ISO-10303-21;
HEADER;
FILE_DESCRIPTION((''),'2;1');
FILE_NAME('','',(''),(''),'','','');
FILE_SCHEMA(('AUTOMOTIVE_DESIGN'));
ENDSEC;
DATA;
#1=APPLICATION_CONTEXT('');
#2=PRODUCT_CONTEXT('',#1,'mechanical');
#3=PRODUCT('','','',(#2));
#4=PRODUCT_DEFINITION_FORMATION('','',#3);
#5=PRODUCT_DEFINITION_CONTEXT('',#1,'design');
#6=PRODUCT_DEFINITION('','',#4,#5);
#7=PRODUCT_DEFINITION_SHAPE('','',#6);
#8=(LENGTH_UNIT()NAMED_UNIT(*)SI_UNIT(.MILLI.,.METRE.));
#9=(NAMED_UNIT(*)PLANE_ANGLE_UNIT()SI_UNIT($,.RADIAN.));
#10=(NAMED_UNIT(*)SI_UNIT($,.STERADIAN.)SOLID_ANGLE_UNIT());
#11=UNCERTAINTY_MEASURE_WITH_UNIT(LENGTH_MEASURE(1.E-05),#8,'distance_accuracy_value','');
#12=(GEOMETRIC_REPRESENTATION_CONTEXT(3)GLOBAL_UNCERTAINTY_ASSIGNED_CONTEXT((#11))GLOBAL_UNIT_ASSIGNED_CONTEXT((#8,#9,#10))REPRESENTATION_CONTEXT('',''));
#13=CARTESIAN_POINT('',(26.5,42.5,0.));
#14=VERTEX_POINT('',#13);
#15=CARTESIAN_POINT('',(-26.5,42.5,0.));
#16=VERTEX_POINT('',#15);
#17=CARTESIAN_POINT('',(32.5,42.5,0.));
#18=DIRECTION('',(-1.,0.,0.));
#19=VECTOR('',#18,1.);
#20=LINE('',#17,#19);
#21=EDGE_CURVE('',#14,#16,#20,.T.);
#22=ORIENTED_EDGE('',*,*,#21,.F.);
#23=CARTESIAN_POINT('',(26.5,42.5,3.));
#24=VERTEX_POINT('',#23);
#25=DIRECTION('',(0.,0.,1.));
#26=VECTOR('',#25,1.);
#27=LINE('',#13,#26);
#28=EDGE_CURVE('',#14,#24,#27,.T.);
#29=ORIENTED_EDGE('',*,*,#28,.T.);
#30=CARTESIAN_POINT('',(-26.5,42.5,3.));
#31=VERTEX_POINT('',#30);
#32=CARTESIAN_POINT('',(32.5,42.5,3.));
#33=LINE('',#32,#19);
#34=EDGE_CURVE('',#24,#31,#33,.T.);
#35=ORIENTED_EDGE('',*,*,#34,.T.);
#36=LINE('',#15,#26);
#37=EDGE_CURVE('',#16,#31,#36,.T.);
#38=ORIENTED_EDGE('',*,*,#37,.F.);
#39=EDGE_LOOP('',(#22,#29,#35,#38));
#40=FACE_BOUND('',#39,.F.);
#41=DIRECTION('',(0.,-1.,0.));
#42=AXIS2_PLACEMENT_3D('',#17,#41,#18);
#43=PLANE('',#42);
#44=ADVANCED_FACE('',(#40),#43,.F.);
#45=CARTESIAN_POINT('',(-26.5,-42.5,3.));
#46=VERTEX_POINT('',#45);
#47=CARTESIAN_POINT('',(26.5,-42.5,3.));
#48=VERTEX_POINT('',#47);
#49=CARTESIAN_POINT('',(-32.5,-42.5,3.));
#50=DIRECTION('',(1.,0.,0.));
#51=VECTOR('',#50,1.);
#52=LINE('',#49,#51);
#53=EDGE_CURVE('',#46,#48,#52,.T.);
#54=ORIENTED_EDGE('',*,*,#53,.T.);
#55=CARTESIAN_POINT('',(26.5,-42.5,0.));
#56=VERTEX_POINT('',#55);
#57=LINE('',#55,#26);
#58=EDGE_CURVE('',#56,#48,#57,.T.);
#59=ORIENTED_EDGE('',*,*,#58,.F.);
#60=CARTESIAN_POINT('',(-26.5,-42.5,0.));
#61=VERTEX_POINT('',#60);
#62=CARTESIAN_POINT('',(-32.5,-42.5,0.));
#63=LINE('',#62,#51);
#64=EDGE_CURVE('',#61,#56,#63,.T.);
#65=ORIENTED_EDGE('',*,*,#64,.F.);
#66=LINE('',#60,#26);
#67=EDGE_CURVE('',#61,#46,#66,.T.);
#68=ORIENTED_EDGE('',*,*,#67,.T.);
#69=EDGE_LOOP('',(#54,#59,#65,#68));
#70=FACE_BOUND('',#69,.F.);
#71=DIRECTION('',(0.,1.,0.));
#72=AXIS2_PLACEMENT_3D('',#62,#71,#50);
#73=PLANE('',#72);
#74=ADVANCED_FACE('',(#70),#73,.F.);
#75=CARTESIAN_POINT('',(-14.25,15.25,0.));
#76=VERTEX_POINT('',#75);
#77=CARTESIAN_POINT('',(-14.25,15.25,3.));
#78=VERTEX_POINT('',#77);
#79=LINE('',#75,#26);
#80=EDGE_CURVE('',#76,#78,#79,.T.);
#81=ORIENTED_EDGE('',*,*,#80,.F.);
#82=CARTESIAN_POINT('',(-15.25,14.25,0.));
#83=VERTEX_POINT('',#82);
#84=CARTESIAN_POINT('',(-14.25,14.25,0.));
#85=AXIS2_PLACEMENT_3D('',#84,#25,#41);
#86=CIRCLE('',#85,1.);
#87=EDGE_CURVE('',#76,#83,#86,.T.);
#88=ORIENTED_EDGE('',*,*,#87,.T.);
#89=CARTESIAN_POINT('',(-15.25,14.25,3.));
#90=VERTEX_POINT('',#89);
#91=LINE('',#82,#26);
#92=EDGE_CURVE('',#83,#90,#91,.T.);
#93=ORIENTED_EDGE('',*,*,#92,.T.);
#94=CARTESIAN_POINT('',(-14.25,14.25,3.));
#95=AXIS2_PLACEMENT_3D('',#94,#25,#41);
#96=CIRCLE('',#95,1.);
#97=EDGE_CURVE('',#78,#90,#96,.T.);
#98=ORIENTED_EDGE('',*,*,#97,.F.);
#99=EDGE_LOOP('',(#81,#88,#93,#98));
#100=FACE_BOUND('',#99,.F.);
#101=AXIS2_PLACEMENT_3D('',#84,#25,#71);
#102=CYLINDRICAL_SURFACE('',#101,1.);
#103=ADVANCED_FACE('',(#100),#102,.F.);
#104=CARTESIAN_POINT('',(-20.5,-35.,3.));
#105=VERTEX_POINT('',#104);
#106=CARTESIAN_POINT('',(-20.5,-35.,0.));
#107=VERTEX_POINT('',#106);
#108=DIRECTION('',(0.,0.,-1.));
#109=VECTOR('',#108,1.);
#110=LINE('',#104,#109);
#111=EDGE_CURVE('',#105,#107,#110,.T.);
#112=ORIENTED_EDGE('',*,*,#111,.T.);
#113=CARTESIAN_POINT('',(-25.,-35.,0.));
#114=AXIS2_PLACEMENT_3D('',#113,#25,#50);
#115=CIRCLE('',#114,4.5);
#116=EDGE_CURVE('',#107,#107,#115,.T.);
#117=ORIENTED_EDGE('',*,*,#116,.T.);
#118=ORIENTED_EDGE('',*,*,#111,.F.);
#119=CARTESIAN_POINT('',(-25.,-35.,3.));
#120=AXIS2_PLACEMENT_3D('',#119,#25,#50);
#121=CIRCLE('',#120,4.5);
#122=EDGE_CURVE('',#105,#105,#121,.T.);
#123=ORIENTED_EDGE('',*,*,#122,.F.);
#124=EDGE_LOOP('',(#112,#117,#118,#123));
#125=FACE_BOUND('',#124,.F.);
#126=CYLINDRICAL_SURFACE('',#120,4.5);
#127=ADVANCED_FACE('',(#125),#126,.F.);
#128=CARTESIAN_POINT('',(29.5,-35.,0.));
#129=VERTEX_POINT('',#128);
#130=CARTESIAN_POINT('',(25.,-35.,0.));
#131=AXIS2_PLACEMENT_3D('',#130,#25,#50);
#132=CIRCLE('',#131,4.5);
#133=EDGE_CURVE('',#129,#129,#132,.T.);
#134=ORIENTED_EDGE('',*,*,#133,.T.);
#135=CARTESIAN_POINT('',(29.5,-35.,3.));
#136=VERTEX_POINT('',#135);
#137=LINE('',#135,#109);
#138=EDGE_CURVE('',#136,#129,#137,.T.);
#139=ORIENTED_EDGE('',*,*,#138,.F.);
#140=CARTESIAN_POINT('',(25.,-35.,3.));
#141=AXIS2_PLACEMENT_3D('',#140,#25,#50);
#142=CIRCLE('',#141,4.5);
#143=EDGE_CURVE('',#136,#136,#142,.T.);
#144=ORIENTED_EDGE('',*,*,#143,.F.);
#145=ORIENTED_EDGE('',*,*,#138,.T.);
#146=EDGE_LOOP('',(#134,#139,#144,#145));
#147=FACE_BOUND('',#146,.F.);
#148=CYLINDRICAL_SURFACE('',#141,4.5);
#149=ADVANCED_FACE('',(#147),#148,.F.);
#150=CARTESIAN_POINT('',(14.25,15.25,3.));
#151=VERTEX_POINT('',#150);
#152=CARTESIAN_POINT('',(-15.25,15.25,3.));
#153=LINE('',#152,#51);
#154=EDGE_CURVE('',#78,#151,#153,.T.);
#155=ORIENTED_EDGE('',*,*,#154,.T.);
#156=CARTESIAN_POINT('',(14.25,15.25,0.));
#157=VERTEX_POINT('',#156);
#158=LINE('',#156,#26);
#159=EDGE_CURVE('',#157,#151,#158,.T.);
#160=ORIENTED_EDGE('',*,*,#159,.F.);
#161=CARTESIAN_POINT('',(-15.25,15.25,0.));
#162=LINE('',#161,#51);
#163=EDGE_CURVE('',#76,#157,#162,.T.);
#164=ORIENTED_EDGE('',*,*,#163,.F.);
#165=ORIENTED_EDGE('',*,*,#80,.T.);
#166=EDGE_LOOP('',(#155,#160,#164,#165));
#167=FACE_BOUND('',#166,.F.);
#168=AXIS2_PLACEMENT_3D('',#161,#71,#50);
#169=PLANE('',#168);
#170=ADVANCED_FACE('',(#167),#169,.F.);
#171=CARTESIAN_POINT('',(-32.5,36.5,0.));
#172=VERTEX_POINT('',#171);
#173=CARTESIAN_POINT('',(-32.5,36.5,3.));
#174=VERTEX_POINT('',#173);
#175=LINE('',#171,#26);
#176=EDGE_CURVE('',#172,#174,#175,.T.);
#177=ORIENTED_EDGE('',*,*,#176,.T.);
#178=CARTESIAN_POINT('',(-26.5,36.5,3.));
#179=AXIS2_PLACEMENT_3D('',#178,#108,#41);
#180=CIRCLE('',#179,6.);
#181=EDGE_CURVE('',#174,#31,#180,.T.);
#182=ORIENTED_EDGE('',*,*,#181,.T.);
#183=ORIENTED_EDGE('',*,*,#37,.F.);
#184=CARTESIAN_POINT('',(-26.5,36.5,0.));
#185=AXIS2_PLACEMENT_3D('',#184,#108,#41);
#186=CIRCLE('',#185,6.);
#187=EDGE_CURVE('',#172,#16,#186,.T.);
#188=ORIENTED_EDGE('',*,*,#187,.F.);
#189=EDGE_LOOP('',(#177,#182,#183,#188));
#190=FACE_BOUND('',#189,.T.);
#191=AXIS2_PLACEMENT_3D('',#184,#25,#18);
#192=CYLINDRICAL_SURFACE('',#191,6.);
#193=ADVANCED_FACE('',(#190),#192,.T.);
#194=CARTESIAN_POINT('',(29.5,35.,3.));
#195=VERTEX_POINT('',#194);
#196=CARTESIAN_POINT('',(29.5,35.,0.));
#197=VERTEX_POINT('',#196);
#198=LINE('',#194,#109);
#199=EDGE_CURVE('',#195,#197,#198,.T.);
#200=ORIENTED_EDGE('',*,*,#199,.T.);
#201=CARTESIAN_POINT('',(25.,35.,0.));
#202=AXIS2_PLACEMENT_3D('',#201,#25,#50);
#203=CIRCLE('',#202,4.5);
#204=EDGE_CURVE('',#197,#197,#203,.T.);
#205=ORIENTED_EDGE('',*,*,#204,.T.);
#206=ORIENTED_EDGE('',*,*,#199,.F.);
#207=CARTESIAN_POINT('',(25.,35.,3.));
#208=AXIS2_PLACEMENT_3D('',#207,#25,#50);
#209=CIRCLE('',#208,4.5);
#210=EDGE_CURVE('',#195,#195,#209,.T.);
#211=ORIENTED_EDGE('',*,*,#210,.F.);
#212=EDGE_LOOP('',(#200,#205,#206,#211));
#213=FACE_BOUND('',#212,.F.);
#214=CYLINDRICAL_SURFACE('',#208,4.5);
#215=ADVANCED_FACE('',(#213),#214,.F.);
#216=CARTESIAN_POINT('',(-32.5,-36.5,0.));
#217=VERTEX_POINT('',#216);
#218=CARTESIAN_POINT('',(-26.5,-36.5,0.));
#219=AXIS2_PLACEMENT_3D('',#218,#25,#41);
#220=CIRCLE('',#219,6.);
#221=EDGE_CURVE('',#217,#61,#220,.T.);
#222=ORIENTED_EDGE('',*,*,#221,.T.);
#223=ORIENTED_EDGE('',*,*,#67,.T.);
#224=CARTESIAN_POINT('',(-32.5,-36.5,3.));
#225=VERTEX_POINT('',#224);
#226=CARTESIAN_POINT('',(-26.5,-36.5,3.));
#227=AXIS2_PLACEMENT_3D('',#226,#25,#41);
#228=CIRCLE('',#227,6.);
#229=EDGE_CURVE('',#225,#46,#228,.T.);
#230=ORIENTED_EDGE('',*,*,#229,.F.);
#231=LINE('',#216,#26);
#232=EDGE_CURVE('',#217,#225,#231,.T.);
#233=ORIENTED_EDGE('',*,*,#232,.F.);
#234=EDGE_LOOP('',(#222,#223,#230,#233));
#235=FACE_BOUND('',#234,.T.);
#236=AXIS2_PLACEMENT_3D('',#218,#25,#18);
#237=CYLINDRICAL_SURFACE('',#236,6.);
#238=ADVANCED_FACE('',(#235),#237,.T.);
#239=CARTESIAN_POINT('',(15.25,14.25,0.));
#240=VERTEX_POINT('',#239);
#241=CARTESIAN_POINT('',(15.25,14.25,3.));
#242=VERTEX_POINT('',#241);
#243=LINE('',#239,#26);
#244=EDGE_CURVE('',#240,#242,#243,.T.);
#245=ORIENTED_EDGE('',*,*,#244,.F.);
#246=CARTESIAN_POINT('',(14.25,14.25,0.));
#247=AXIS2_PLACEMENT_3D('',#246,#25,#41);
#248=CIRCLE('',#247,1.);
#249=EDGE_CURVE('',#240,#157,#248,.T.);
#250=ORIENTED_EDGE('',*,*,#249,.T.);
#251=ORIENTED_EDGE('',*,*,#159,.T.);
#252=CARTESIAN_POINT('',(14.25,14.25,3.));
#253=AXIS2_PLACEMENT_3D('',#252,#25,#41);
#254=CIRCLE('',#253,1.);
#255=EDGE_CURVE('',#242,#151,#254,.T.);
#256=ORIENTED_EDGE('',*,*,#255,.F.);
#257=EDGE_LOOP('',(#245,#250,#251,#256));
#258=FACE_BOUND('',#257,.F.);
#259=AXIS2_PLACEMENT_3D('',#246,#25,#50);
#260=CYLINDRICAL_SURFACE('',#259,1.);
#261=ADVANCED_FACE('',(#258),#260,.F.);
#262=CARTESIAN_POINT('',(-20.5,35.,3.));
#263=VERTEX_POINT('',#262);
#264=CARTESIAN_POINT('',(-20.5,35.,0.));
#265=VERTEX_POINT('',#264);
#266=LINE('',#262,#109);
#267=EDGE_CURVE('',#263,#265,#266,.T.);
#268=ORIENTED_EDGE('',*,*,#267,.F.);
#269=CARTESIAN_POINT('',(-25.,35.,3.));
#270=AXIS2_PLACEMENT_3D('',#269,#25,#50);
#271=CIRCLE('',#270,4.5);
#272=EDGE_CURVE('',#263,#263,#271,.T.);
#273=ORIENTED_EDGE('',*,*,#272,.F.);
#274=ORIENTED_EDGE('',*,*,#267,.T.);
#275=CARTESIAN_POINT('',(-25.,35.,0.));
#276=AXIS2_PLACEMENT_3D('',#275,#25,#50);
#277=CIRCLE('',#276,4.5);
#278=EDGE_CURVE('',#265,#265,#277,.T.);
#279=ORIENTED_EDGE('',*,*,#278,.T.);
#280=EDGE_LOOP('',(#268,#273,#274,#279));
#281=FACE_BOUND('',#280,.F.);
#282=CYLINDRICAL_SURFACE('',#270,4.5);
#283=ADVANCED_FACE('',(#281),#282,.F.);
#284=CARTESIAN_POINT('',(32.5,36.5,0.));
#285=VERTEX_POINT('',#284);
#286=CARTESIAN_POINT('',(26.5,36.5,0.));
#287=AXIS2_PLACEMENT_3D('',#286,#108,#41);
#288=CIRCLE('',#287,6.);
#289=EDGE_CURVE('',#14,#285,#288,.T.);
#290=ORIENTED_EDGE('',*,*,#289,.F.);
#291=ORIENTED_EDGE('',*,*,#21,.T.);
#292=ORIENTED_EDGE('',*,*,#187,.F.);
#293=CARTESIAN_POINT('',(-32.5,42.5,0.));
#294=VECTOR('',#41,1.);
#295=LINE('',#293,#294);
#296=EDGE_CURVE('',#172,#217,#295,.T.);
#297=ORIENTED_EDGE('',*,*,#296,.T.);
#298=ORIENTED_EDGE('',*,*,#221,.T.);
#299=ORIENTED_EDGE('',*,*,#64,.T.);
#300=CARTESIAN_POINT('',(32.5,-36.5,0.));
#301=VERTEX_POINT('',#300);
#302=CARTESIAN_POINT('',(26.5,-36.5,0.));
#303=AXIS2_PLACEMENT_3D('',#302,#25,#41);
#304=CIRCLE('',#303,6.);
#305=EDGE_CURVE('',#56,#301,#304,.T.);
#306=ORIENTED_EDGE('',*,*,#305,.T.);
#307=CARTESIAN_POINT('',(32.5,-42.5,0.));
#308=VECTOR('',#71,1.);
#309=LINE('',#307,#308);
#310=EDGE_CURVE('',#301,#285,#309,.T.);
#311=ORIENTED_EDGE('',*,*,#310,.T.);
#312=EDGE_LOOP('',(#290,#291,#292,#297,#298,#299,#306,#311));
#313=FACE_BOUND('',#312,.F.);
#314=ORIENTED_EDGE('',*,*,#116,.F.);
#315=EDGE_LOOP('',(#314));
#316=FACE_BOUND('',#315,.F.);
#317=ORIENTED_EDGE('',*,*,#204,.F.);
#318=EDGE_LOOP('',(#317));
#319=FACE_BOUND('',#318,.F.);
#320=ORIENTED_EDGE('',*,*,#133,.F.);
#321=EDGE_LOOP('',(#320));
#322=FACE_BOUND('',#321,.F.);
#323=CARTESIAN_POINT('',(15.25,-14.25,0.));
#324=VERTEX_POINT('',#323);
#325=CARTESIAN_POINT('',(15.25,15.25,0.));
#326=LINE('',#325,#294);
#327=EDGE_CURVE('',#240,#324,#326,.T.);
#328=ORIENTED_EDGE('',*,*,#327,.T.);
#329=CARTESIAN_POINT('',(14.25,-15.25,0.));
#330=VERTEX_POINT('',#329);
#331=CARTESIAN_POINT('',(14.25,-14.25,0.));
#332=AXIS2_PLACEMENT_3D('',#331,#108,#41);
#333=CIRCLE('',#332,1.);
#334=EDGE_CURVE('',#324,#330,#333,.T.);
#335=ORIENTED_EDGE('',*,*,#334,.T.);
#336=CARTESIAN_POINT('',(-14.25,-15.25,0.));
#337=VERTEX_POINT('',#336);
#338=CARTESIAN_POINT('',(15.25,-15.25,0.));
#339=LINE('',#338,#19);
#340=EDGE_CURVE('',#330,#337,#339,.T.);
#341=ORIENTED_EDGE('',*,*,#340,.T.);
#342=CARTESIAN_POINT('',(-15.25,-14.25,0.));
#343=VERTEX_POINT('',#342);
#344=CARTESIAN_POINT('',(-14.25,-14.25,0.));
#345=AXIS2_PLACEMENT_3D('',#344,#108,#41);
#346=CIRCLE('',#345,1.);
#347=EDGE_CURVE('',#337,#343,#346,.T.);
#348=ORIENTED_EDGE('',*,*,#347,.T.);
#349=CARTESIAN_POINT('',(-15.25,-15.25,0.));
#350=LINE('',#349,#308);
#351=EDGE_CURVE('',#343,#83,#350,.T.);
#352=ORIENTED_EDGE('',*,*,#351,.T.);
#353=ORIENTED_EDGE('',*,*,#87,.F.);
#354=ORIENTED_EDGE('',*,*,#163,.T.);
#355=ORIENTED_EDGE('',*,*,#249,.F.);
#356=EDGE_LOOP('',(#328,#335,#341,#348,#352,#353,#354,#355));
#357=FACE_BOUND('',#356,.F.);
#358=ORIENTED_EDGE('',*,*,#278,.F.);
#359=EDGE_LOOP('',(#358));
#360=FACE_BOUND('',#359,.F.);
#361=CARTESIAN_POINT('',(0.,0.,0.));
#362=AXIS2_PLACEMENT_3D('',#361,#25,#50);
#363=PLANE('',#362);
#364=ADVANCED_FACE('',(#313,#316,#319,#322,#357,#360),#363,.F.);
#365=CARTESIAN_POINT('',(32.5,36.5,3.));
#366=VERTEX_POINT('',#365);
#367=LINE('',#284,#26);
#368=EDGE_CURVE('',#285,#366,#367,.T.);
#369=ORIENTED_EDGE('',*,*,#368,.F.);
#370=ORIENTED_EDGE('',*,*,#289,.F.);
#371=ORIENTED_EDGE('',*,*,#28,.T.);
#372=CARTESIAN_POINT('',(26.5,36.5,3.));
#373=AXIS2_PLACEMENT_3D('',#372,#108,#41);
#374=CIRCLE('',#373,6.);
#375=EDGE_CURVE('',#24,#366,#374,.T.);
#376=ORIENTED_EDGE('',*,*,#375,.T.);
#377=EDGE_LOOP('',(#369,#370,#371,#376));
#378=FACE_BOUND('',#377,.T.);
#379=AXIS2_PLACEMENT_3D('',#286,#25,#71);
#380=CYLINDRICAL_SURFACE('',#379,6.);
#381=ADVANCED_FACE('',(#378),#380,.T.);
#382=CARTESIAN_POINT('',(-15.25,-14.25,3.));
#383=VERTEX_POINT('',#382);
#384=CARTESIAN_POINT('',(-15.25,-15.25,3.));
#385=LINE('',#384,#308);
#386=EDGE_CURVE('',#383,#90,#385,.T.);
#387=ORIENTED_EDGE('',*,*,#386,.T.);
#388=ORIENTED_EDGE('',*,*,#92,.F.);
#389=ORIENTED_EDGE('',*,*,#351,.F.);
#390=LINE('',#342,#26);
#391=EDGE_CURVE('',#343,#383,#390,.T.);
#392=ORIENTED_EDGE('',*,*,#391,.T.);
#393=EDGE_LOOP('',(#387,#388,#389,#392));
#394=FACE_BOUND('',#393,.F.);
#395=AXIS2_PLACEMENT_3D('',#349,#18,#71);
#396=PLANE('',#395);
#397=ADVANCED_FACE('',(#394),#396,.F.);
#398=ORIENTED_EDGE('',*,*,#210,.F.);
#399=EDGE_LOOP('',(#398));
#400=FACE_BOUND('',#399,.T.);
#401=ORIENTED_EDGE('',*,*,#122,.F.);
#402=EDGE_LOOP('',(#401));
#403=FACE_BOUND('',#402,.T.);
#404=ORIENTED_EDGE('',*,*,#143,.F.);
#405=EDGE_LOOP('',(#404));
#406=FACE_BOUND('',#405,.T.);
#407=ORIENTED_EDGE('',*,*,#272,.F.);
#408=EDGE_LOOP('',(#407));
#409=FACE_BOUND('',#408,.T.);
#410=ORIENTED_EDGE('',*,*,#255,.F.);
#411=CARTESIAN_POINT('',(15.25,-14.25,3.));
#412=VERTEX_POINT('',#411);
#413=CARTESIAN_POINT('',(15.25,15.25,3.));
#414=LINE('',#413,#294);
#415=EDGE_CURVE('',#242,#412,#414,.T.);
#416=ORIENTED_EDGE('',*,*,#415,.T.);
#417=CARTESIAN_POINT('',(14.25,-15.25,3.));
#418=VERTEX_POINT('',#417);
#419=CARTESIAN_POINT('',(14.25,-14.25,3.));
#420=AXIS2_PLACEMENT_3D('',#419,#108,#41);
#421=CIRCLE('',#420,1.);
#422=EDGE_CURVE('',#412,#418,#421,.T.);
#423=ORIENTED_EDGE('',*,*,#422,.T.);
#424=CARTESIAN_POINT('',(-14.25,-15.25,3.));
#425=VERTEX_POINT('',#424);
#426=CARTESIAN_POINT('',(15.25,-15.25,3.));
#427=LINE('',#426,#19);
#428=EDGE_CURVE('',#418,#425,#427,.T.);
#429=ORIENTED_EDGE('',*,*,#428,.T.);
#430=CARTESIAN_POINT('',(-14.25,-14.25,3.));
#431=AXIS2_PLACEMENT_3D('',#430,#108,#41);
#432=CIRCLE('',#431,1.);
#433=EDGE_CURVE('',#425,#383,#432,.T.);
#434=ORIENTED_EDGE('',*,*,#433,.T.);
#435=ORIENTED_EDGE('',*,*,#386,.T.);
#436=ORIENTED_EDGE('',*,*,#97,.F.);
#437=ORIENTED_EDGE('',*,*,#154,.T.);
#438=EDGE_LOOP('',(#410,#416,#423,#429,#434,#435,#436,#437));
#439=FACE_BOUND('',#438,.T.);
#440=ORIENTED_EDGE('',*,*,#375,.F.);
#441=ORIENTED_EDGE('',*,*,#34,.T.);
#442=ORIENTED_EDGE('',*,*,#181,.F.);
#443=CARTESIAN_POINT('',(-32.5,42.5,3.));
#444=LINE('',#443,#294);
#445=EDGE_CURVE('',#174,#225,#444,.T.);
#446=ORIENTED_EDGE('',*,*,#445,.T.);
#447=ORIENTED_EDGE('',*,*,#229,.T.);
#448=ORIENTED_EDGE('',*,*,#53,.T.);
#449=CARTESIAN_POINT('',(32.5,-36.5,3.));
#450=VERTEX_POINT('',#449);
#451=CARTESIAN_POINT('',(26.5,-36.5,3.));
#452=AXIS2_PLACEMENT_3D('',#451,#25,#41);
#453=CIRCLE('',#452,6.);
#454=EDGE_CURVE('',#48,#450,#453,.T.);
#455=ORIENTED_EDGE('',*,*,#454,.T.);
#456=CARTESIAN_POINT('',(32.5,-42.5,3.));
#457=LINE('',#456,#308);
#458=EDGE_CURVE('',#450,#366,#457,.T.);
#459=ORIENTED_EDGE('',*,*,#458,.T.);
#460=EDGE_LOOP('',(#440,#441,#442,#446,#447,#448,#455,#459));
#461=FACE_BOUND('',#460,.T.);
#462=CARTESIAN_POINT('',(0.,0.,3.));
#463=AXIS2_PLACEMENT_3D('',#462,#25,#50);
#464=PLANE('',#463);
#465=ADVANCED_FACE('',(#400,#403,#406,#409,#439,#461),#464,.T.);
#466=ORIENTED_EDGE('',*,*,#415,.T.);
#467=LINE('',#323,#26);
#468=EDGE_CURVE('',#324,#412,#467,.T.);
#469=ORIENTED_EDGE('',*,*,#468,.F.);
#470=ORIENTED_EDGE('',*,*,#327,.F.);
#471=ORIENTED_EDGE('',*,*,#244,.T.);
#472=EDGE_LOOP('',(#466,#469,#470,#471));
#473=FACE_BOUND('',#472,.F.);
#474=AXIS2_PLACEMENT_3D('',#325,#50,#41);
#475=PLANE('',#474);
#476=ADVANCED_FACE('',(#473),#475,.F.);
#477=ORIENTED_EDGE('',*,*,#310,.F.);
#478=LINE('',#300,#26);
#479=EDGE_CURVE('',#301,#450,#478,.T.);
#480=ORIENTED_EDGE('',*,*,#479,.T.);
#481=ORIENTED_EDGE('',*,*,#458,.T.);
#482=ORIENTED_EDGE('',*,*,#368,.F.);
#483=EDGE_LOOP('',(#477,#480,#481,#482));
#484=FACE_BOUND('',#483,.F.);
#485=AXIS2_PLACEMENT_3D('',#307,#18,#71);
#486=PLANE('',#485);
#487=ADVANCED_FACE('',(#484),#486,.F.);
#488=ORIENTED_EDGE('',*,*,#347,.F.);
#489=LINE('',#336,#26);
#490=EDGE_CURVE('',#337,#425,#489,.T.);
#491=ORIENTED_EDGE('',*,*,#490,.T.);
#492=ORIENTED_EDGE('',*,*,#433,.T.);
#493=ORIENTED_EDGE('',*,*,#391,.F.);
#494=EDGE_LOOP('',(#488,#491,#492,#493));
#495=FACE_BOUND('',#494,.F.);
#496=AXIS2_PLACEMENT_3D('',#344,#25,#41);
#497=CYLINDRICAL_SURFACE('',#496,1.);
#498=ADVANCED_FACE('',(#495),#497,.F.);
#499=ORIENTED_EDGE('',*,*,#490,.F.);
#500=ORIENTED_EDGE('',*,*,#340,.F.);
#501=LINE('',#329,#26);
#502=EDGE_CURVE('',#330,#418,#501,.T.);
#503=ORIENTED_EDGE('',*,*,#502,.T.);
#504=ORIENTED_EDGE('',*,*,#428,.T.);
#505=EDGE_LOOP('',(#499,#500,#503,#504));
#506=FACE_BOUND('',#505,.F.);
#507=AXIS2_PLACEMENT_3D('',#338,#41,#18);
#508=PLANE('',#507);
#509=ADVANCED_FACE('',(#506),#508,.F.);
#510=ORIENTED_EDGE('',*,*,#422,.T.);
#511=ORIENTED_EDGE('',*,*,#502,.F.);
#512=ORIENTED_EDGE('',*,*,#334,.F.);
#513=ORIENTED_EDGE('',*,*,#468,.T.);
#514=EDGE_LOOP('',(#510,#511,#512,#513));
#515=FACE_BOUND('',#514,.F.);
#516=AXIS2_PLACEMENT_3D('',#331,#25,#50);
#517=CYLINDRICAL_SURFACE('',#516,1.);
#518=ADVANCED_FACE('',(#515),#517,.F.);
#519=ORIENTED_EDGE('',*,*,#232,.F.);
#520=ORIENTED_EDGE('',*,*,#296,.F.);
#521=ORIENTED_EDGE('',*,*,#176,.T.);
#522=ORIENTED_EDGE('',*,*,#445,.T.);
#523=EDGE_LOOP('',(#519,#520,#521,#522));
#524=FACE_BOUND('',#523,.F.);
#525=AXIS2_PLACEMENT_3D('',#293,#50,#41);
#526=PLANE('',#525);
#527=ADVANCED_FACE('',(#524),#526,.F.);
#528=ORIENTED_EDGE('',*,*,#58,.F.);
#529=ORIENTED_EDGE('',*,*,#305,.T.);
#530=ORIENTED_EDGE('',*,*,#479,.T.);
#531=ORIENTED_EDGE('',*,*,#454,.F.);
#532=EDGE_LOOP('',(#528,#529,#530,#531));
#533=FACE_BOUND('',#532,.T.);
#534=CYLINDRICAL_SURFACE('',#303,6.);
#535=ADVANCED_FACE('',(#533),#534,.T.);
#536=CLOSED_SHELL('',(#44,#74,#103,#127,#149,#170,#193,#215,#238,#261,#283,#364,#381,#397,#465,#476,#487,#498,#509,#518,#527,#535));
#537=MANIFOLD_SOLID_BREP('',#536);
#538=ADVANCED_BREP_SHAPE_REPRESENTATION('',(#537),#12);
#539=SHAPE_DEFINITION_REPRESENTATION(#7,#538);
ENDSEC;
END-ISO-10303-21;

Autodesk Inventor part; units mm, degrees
ref_plane "YZ Plane" through (0, 0, 0) normal (1, 0, 0) x (0, 1, 0)
ref_plane "XZ Plane" through (0, 0, 0) normal (0, 1, 0) x (-1, 0, 0)
ref_plane "XY Plane" through (0, 0, 0) normal (0, 0, 1) x (1, 0, 0)
sketch "Sketch1" plane through (0, 0, 0) normal (0, 0, 1) x (1, 0, 0)
  line L0 (-32.5, -42.5) -> (32.5, -42.5)
  line L1 (32.5, -42.5) -> (32.5, 42.5)
  line L2 (32.5, 42.5) -> (-32.5, 42.5)
  line L3 (-32.5, 42.5) -> (-32.5, -42.5)
  line L4 (-32.5, -42.5) -> (32.5, 42.5) construction
  line L5 (32.5, -42.5) -> (-32.5, 42.5) construction
  line L6 (15.25, -15.25) -> (-15.25, -15.25)
  line L7 (-15.25, -15.25) -> (-15.25, 15.25)
  line L8 (-15.25, 15.25) -> (15.25, 15.25)
  line L9 (15.25, 15.25) -> (15.25, -15.25)
  line L10 (15.25, -15.25) -> (-15.25, 15.25) construction
  line L11 (-15.25, -15.25) -> (15.25, 15.25) construction
  point P0 (0, 0)
  dimension "d154" = 65
  dimension "d155" = 85
  dimension "d172" = 30.5
extrude "Plate5" add sketch "Sketch1" along normal blind 3
sketch "Sketch9" plane through (0, 0, 3) normal (0, 0, 1) x (1, 0, 0)
  circle A0 centre (25, -35) radius 4.5
  line L0 (25, 35) -> (-25, 35) construction
  line L1 (-25, 35) -> (-25, -35) construction
  line L2 (-25, -35) -> (25, -35) construction
  line L3 (25, -35) -> (25, 35) construction
  line L4 (25, 35) -> (-25, -35) construction
  line L5 (-25, 35) -> (25, -35) construction
  circle A1 centre (-25, -35) radius 4.5
  circle A2 centre (25, 35) radius 4.5
  circle A3 centre (-25, 35) radius 4.5
  point P0 (0, 0)
  dimension "d173" = 70
  dimension "d174" = 9
  dimension "d175" = 50
extrude "Cut2" cut sketch "Sketch9" against normal blind 3
fillet "Corner Round1" radius 6 4 edges at (32.5, 42.5, 1.5) (-32.5, 42.5, 1.5) (-32.5, -42.5, 1.5) (32.5, -42.5, 1.5)
fillet "Corner Round2" radius 1 4 edges at (-15.25, 15.25, 1.5) (-15.25, -15.25, 1.5) (15.25, -15.25, 1.5) (15.25, 15.25, 1.5)
properties part number "TZS 1669 FDS 940 FLANGE 3" material "Stainless Steel"
